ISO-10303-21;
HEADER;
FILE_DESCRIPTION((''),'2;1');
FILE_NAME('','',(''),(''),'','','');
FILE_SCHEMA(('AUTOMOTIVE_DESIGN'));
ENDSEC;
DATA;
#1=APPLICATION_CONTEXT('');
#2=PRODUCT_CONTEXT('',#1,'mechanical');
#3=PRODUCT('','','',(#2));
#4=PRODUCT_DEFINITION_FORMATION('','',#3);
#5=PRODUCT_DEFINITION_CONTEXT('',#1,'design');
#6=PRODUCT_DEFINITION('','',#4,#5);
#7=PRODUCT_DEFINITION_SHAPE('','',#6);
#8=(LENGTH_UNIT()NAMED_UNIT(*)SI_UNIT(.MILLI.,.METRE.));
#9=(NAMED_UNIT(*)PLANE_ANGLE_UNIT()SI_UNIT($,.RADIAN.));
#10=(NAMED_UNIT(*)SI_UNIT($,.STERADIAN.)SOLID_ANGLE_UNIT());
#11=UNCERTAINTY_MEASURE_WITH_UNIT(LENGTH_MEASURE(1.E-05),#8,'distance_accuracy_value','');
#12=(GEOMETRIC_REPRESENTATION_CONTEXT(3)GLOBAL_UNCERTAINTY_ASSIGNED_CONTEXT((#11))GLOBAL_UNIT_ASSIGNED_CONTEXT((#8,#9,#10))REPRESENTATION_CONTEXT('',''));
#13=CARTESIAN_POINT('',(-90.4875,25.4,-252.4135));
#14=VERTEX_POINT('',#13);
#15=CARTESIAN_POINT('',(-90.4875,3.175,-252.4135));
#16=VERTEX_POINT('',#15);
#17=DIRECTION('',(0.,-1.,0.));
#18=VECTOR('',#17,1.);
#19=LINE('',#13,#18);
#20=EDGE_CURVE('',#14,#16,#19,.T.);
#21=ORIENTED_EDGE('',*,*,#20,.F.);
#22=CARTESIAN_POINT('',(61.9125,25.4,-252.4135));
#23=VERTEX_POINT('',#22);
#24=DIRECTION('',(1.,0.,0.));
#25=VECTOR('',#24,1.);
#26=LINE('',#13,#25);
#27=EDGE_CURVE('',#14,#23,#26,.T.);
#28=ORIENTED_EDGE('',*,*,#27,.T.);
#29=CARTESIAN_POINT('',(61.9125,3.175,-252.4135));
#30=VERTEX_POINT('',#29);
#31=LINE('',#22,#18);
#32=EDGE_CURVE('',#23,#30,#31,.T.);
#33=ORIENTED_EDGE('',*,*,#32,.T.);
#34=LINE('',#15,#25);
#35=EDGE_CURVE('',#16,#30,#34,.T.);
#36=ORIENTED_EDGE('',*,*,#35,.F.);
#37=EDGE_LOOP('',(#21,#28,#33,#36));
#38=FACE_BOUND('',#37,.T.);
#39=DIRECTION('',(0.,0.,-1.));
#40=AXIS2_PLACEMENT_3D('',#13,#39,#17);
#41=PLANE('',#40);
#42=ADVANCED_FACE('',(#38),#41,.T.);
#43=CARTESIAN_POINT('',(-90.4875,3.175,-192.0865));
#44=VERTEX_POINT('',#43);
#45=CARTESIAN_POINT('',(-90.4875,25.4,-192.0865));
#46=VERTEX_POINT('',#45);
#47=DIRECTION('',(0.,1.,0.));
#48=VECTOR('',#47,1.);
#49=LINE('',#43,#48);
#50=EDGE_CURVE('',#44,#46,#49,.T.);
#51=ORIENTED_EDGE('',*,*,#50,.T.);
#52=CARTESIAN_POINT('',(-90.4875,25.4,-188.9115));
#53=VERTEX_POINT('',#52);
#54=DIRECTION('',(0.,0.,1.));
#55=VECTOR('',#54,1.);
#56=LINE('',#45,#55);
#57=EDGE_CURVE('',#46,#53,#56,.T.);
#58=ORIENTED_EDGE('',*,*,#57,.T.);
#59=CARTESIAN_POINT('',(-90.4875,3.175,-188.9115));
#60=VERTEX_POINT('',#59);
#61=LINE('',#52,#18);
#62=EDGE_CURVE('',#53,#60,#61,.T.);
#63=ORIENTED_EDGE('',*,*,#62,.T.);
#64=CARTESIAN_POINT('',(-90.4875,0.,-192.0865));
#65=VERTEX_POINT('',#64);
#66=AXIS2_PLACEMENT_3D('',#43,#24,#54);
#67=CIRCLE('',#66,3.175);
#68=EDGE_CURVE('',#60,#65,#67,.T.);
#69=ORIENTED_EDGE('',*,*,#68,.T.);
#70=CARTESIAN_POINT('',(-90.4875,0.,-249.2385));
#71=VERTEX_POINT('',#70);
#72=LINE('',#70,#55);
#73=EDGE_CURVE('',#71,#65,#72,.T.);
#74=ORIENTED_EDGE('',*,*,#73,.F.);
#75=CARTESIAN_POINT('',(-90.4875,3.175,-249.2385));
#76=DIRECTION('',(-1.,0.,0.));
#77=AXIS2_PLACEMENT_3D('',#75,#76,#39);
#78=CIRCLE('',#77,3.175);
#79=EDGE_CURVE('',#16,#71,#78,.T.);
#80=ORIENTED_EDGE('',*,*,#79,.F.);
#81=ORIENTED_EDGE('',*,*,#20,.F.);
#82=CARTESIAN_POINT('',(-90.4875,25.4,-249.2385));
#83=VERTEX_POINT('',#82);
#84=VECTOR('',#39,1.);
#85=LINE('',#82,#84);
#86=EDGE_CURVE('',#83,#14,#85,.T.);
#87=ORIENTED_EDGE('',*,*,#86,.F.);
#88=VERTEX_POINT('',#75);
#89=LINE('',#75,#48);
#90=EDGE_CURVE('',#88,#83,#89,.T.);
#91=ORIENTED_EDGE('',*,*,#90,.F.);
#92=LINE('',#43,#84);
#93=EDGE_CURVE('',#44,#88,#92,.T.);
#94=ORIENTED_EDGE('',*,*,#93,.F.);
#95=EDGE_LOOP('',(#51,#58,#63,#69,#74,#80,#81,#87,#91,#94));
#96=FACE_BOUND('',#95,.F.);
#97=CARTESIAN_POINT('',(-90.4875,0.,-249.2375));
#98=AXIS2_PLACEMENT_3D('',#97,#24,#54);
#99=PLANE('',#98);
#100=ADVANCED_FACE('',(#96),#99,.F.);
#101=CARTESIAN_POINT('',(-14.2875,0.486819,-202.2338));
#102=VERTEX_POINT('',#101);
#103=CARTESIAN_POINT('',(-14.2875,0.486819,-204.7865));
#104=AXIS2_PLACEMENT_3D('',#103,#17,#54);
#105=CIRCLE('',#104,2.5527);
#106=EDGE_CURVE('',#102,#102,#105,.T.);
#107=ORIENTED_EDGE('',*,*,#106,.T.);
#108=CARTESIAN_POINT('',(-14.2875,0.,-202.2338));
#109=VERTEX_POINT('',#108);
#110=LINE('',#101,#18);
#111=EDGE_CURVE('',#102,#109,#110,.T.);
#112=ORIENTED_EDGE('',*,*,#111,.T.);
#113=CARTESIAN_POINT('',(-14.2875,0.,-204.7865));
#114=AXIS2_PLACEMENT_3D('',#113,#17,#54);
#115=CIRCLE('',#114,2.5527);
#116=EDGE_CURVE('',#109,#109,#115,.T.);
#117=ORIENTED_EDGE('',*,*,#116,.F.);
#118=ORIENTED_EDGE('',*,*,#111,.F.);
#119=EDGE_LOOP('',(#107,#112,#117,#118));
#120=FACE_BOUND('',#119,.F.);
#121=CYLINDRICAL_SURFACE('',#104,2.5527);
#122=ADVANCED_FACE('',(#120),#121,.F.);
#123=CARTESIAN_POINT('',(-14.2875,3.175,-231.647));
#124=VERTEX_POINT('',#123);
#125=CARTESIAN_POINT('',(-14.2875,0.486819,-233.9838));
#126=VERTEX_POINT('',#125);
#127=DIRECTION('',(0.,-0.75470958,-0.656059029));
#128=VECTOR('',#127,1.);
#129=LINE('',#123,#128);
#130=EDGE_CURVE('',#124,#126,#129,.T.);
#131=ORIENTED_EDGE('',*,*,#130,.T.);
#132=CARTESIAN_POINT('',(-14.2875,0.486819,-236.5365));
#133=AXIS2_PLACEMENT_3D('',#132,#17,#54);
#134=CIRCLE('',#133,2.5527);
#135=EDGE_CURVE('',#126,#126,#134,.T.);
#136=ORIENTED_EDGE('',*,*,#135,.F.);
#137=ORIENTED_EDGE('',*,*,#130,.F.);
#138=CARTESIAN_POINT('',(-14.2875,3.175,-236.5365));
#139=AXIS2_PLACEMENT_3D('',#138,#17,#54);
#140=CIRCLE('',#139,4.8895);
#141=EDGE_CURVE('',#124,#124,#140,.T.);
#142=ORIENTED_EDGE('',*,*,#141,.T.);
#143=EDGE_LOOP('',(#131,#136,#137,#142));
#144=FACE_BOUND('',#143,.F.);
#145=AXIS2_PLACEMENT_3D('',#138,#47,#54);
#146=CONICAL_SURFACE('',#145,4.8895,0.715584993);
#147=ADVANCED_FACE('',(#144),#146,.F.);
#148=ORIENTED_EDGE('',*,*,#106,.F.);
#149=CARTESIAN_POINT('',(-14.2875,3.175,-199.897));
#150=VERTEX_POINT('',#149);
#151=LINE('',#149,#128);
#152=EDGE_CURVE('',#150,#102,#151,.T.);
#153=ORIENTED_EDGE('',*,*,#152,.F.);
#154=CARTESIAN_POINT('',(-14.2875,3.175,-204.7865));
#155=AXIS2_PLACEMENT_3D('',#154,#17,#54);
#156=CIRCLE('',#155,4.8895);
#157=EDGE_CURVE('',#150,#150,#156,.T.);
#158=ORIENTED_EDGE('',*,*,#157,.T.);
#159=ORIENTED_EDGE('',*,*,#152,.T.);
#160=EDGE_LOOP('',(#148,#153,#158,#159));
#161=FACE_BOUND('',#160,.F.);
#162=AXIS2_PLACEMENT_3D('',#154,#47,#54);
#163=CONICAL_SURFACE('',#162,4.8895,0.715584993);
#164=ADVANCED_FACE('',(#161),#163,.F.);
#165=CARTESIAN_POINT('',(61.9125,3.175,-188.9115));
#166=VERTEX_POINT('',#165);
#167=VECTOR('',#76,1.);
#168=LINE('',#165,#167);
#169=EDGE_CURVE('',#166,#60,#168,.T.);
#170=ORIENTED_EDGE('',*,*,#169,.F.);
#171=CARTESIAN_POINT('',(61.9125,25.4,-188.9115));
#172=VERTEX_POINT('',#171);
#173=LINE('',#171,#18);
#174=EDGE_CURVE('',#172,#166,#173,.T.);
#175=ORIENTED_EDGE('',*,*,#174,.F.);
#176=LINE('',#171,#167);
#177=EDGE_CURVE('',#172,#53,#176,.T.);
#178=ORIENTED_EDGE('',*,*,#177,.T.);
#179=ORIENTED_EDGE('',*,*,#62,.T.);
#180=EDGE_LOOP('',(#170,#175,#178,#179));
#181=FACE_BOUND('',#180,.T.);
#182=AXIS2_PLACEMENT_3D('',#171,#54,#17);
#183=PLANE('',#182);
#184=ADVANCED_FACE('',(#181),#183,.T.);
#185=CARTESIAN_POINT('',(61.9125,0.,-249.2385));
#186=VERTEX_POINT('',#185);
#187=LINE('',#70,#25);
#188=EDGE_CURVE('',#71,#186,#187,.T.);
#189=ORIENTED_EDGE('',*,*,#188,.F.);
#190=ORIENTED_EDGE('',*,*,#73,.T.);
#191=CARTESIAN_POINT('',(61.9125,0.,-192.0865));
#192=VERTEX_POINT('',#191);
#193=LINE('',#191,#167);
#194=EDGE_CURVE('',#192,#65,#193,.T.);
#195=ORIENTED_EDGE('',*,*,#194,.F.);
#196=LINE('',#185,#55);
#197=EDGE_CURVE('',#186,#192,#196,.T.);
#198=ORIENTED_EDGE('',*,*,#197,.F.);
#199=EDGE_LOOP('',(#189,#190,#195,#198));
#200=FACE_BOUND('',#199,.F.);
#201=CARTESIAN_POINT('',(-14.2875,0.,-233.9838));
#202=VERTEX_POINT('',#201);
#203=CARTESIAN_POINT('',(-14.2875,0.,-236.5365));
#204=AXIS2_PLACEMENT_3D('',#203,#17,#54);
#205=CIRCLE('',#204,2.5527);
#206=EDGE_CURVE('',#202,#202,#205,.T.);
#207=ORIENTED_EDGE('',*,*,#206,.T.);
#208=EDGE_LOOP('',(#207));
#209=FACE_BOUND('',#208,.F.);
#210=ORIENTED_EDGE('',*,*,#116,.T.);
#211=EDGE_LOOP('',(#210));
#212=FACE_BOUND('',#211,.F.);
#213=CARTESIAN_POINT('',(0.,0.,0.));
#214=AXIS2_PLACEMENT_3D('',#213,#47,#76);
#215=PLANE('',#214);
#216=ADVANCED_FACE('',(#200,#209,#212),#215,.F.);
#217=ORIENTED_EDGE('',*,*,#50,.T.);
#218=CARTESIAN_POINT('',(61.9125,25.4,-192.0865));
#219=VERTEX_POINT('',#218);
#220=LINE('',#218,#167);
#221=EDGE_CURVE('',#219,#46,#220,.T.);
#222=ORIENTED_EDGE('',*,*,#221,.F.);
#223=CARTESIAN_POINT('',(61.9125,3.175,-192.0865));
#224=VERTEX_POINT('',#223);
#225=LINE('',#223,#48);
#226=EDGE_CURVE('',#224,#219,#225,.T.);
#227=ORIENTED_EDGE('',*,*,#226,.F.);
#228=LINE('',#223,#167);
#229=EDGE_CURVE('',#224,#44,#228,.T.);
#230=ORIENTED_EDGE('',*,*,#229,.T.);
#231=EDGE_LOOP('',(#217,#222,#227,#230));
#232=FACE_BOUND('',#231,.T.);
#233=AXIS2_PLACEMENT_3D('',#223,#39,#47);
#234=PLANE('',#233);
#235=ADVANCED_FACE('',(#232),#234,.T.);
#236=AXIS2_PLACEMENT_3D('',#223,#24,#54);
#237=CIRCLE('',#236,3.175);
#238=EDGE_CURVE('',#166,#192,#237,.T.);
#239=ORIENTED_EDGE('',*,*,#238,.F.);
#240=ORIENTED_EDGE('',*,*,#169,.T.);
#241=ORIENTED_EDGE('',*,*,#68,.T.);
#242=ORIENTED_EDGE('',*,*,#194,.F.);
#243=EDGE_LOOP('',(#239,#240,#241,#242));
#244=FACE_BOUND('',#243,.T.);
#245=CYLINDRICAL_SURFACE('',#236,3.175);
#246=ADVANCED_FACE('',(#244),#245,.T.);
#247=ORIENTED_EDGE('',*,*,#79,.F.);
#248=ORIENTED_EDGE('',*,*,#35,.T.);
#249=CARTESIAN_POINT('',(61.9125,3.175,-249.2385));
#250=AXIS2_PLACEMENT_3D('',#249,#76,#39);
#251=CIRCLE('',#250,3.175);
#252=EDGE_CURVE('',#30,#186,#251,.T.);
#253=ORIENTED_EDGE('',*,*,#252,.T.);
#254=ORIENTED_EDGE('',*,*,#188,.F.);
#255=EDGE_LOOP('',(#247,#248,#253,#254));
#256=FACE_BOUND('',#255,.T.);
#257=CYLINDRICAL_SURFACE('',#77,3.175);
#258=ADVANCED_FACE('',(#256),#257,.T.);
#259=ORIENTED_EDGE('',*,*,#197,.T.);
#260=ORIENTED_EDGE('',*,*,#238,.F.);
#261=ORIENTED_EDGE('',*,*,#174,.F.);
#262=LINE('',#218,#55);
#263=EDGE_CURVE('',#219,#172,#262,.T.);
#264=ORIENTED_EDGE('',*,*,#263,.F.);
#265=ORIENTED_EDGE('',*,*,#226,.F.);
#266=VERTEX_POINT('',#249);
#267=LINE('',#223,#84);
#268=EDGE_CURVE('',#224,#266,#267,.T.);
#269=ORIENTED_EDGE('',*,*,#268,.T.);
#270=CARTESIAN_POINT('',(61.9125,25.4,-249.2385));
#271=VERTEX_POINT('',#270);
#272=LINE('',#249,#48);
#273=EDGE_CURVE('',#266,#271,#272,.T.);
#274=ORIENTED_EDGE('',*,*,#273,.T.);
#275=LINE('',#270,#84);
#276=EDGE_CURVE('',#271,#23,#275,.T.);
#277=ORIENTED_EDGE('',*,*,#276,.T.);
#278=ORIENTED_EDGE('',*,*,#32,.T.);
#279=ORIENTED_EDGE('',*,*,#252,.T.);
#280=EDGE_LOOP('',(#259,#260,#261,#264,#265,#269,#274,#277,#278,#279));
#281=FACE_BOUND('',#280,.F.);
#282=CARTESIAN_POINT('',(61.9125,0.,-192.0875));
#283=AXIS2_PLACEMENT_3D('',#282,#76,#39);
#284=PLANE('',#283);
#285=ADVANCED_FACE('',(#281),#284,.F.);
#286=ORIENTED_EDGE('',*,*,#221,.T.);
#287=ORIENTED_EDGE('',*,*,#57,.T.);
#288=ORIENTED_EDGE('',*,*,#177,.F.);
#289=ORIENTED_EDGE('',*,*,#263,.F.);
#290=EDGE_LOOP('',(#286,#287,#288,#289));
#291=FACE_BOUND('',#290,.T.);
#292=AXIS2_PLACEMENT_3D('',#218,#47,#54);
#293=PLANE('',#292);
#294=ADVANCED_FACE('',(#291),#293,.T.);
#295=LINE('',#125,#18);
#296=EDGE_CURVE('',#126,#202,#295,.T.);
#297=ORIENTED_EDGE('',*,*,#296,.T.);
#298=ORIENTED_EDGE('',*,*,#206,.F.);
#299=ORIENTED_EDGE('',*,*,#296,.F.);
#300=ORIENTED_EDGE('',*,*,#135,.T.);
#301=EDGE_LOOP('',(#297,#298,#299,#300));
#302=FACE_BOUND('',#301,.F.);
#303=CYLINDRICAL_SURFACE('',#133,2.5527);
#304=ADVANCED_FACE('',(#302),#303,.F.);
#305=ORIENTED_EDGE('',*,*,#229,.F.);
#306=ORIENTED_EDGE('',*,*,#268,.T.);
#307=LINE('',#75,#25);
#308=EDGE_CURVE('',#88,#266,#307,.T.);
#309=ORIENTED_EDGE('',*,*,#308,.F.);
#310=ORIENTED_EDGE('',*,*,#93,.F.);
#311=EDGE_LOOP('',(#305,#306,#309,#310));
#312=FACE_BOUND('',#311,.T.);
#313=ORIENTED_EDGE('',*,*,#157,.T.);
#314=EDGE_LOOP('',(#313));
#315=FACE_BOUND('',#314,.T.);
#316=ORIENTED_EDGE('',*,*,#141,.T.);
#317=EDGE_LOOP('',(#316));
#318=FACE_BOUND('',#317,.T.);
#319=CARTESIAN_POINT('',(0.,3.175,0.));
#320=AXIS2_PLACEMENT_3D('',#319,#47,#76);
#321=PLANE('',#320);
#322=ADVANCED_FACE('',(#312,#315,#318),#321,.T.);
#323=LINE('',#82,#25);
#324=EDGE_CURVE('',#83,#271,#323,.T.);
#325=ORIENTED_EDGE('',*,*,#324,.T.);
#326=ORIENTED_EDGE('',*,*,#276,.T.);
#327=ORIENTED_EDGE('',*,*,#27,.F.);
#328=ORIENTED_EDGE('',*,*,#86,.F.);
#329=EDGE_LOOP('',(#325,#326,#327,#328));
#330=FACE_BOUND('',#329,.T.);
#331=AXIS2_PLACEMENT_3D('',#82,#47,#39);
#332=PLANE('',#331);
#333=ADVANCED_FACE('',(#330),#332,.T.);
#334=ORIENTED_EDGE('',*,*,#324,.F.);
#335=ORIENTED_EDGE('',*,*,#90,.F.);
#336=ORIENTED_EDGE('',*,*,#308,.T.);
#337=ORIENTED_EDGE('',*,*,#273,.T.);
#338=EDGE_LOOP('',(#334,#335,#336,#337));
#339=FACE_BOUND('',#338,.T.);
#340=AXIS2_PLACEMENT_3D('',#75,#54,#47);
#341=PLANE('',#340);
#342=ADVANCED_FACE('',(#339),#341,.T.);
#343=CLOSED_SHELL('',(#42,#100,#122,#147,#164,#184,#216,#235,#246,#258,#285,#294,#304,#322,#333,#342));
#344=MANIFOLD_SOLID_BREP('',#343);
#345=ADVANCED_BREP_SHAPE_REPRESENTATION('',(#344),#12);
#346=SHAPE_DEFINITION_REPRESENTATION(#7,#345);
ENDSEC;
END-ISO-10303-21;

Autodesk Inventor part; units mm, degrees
ref_plane "YZ Plane" through (0, 0, 0) normal (1, 0, 0) x (0, 1, 0)
ref_plane "XZ Plane" through (0, 0, 0) normal (0, 1, 0) x (-1, 0, 0)
ref_plane "XY Plane" through (0, 0, 0) normal (0, 0, 1) x (1, 0, 0)
sketch "Sketch2" plane through (0, 0, 0) normal (0, 1, 0) x (-1, 0, 0)
  line L0 (90.4875, -192.0875) -> (-61.9125, -192.0875)
  line L1 (-61.9125, -192.0875) -> (-61.9125, -249.2375)
  line L2 (-61.9125, -249.2375) -> (90.4875, -249.2375)
  line L3 (90.4875, -249.2375) -> (90.4875, -192.0875)
  dimension "d5" = 152.4
  dimension "d6" = 57.15
extrude "Plate1" add sketch "Sketch2" along normal blind 3.175
sketch "Sketch3" plane through (61.9125, 3.176, -192.0865) normal (0, 0, 1) x (1, 0, 0)
  line L0 (-152.4, 0) -> (0, 0)
  line L1 (0, 0) -> (0, 22.224)
  line L2 (0, 22.224) -> (-152.4, 22.224)
  line L3 (-152.4, 22.224) -> (-152.4, 0)
edge flange "Flange1" height 25.4 angle 90 thickness 3.175 bend radius 0 thickness toward (0, 0, 1) relief tear relief width 3.175 relief depth 1.5875 corner gap 3.175 corner form 0 edges at (-14.2875, 3.175, -192.0875) (-14.2875, 3.175, -249.2375) wall of the first edge with corners at (-90.4875, 3.176, -192.0865) (61.9125, 3.176, -192.0865) (61.9125, 25.4, -192.0865) (-90.4875, 25.4, -192.0865)
bend "Bend1"
corner "Corner1"
sketch "Sketch4" plane through (0, 3.175, 0) normal (0, 1, 0) x (1, 0, 0)
  line L0 (-14.2875, 204.7865) -> (-14.2875, 236.5365) construction
  line L1 (-90.4875, 188.9115) -> (61.9125, 188.9115) construction
  line L2 (-90.4875, 192.0875) -> (-90.4875, 249.2375) construction
  point P0 (0, 0)
  dimension "d20" = 31.75
  dimension "d21" = 15.875
  dimension "d22" = 76.2
hole "Hole1" at (-14.2875, 3.175, -204.7865) at (-14.2875, 3.175, -236.5365) direction (0, -1, 0) diameter 5.1054 end through all countersink diameter 9.779 countersink angle 82 clearance for "Flat Head Machine Screw (82)" size "#10" standard "Ansi Unified Screw Threads"
equation "\"d10\" = BendReliefWidth"
equation "\"d11\" = BendReliefDepth"
equation "\"d12\" = MinimumRemnant"
equation "\"d13\" = BendRadius"
equation "\"d17\" = CornerReliefSize"
equation "\"d18\" = GapSize"
equation "\"d19\" = JacobiRadiusSize"
equation "\"BendRadius\" = Thickness"
equation "\"BendReliefWidth\" = Thickness"
equation "\"BendReliefDepth\" = 0.5 * Thickness"
equation "\"CornerReliefSize\" = 4 * Thickness"
equation "\"MinimumRemnant\" = 2 * Thickness"
equation "\"TransitionRadius\" = BendRadius"
equation "\"JacobiRadiusSize\" = BendRadius"
equation "\"GapSize\" = Thickness"
equation "\"d9\" = BendRadius"
equation "\"Thickness\" = 3.175"
properties part number "uchannel"
